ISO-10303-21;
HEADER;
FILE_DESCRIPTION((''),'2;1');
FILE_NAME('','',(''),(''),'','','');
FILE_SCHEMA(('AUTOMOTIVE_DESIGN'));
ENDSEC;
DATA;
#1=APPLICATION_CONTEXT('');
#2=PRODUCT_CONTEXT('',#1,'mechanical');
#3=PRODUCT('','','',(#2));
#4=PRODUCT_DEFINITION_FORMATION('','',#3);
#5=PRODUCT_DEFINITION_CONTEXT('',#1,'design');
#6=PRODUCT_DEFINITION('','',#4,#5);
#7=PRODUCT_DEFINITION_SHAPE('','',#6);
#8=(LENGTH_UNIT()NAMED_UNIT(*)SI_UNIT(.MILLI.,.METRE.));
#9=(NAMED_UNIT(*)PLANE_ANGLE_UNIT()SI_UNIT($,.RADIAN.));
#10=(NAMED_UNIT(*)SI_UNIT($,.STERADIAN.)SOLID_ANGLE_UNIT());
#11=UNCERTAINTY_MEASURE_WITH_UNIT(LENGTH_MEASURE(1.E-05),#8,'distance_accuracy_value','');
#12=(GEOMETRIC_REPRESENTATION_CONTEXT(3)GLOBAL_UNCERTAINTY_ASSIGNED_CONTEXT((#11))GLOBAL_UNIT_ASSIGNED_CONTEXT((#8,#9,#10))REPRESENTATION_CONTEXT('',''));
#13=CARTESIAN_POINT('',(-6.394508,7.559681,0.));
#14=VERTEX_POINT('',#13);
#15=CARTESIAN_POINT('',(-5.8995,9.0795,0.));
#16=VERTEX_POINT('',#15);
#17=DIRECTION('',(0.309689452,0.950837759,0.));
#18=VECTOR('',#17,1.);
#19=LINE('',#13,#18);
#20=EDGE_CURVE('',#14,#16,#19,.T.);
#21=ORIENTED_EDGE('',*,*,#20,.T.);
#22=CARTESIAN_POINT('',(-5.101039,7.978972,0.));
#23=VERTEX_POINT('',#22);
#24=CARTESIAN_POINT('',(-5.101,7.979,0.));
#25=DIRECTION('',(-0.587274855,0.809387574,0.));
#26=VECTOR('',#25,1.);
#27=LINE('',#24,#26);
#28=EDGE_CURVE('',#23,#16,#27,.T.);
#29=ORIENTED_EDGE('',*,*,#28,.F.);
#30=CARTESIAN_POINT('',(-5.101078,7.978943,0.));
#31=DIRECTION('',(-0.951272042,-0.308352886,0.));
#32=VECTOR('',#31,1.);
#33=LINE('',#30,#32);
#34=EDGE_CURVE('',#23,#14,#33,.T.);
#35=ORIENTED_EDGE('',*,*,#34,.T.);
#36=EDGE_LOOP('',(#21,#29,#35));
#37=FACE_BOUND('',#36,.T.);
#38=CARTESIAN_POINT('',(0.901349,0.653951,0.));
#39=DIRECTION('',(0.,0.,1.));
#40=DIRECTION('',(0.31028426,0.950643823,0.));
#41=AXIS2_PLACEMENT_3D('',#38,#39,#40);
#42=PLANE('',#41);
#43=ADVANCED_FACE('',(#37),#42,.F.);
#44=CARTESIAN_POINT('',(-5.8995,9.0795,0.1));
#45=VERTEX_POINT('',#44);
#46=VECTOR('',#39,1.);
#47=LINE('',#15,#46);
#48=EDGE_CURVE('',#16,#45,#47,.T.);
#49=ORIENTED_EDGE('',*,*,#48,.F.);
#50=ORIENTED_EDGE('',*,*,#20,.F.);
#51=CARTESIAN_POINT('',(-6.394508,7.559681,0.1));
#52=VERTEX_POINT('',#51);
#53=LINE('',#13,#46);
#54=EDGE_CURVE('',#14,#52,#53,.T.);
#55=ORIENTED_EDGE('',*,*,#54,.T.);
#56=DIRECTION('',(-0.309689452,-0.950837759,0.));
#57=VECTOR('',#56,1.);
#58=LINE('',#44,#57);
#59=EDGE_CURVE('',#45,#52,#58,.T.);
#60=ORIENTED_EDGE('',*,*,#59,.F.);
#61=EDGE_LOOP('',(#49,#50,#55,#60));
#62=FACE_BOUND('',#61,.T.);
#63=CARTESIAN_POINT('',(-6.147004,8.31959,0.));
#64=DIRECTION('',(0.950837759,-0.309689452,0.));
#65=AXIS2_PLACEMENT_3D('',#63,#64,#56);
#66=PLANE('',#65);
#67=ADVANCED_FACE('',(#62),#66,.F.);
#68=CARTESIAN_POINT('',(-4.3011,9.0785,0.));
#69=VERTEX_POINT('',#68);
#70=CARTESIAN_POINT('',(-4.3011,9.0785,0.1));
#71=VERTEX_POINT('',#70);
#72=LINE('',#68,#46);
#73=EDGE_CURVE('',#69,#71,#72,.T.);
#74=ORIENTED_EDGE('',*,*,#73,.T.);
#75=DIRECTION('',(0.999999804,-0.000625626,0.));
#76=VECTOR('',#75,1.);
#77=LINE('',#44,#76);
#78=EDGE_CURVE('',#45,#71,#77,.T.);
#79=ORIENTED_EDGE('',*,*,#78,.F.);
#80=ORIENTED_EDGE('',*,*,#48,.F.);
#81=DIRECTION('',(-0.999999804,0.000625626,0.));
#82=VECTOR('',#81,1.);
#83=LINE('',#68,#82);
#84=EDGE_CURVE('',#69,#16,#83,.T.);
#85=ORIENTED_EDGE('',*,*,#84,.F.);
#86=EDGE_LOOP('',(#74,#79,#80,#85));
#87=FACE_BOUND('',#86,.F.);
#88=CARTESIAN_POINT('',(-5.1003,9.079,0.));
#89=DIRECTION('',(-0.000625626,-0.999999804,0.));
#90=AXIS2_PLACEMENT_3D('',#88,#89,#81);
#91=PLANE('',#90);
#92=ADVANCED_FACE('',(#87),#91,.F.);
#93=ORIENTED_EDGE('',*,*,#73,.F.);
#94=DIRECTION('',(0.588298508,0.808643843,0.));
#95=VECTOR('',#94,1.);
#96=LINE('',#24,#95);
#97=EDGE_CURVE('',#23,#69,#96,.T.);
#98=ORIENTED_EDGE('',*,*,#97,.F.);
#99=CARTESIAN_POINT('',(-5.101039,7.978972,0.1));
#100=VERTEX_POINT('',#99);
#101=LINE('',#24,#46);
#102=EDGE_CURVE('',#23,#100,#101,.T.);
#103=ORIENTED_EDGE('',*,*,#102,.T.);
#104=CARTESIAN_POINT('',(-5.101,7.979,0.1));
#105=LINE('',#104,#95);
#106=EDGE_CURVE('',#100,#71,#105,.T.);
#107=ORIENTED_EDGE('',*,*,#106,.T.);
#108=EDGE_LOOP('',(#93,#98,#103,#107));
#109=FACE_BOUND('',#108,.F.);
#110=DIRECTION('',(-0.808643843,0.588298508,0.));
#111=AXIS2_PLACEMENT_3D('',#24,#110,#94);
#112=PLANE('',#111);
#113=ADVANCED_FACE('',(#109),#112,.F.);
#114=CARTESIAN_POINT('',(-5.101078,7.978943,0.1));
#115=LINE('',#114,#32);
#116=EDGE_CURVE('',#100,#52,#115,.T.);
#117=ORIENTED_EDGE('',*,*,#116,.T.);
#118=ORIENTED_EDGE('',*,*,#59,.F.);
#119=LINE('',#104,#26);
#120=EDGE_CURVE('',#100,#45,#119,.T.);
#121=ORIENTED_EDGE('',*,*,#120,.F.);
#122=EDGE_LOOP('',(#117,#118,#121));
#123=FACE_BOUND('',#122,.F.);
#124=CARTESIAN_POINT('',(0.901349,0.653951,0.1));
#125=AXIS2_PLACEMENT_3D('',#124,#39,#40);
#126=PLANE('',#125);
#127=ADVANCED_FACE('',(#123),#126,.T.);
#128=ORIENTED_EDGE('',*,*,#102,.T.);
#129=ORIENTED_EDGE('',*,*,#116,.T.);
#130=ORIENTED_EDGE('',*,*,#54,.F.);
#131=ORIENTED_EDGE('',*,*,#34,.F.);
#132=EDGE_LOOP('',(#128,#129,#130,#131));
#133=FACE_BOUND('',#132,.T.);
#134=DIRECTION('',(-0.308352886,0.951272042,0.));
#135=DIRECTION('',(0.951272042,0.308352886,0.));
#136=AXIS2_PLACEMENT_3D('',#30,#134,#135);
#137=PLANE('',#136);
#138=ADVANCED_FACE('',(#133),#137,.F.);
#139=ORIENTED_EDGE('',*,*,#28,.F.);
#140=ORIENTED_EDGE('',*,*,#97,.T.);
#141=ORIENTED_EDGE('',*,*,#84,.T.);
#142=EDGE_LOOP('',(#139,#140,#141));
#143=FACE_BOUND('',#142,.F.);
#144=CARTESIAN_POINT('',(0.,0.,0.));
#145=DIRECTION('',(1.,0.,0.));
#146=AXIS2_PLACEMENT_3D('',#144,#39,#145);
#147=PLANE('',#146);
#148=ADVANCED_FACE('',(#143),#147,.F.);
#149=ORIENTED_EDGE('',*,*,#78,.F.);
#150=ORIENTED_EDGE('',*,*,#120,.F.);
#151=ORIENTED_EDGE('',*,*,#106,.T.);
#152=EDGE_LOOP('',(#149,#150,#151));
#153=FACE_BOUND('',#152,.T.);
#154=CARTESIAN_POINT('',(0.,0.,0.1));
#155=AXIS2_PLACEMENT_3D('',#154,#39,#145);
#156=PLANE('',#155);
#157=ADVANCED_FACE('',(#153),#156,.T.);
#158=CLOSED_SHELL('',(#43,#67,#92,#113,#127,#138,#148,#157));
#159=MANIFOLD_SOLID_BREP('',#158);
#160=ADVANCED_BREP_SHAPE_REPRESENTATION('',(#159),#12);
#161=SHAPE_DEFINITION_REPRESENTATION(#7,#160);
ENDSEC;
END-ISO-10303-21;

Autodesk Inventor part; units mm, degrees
ref_plane "YZ Plane" through (0, 0, 0) normal (1, 0, 0) x (0, 1, 0)
ref_plane "XZ Plane" through (0, 0, 0) normal (0, 1, 0) x (-1, 0, 0)
ref_plane "XY Plane" through (0, 0, 0) normal (0, 0, 1) x (1, 0, 0)
sketch "Boceto1" plane through (0, 0, 0) normal (0, 0, 1) x (1, 0, 0)
  line L0 (-5.101, 7.979) -> (-5.1003, 9.079) projected
  line L1 (-5.1003, 9.079) -> (-5.8995, 9.0795) projected
  line L2 (-5.101, 7.979) -> (-5.8995, 9.0795) projected
  line L3 (-5.8995, 9.0795) -> (-5.1003, 9.079)
  line L4 (-5.101, 7.979) -> (-5.8995, 9.0795)
  line L5 (-5.1003, 9.079) -> (-5.101, 7.979)
  line L6 (-5.1003, 9.079) -> (-4.3011, 9.0785)
  line L7 (-5.101, 7.979) -> (-4.3011, 9.0785)
  point P0 (0, 0)
extrude "Extrusión1" add sketch "Boceto1" along normal blind 0.1
mirror "Simetría1" about plane through (-5.8995, 9.0795, 0) normal (-0.8094085, -0.587246, 0)
